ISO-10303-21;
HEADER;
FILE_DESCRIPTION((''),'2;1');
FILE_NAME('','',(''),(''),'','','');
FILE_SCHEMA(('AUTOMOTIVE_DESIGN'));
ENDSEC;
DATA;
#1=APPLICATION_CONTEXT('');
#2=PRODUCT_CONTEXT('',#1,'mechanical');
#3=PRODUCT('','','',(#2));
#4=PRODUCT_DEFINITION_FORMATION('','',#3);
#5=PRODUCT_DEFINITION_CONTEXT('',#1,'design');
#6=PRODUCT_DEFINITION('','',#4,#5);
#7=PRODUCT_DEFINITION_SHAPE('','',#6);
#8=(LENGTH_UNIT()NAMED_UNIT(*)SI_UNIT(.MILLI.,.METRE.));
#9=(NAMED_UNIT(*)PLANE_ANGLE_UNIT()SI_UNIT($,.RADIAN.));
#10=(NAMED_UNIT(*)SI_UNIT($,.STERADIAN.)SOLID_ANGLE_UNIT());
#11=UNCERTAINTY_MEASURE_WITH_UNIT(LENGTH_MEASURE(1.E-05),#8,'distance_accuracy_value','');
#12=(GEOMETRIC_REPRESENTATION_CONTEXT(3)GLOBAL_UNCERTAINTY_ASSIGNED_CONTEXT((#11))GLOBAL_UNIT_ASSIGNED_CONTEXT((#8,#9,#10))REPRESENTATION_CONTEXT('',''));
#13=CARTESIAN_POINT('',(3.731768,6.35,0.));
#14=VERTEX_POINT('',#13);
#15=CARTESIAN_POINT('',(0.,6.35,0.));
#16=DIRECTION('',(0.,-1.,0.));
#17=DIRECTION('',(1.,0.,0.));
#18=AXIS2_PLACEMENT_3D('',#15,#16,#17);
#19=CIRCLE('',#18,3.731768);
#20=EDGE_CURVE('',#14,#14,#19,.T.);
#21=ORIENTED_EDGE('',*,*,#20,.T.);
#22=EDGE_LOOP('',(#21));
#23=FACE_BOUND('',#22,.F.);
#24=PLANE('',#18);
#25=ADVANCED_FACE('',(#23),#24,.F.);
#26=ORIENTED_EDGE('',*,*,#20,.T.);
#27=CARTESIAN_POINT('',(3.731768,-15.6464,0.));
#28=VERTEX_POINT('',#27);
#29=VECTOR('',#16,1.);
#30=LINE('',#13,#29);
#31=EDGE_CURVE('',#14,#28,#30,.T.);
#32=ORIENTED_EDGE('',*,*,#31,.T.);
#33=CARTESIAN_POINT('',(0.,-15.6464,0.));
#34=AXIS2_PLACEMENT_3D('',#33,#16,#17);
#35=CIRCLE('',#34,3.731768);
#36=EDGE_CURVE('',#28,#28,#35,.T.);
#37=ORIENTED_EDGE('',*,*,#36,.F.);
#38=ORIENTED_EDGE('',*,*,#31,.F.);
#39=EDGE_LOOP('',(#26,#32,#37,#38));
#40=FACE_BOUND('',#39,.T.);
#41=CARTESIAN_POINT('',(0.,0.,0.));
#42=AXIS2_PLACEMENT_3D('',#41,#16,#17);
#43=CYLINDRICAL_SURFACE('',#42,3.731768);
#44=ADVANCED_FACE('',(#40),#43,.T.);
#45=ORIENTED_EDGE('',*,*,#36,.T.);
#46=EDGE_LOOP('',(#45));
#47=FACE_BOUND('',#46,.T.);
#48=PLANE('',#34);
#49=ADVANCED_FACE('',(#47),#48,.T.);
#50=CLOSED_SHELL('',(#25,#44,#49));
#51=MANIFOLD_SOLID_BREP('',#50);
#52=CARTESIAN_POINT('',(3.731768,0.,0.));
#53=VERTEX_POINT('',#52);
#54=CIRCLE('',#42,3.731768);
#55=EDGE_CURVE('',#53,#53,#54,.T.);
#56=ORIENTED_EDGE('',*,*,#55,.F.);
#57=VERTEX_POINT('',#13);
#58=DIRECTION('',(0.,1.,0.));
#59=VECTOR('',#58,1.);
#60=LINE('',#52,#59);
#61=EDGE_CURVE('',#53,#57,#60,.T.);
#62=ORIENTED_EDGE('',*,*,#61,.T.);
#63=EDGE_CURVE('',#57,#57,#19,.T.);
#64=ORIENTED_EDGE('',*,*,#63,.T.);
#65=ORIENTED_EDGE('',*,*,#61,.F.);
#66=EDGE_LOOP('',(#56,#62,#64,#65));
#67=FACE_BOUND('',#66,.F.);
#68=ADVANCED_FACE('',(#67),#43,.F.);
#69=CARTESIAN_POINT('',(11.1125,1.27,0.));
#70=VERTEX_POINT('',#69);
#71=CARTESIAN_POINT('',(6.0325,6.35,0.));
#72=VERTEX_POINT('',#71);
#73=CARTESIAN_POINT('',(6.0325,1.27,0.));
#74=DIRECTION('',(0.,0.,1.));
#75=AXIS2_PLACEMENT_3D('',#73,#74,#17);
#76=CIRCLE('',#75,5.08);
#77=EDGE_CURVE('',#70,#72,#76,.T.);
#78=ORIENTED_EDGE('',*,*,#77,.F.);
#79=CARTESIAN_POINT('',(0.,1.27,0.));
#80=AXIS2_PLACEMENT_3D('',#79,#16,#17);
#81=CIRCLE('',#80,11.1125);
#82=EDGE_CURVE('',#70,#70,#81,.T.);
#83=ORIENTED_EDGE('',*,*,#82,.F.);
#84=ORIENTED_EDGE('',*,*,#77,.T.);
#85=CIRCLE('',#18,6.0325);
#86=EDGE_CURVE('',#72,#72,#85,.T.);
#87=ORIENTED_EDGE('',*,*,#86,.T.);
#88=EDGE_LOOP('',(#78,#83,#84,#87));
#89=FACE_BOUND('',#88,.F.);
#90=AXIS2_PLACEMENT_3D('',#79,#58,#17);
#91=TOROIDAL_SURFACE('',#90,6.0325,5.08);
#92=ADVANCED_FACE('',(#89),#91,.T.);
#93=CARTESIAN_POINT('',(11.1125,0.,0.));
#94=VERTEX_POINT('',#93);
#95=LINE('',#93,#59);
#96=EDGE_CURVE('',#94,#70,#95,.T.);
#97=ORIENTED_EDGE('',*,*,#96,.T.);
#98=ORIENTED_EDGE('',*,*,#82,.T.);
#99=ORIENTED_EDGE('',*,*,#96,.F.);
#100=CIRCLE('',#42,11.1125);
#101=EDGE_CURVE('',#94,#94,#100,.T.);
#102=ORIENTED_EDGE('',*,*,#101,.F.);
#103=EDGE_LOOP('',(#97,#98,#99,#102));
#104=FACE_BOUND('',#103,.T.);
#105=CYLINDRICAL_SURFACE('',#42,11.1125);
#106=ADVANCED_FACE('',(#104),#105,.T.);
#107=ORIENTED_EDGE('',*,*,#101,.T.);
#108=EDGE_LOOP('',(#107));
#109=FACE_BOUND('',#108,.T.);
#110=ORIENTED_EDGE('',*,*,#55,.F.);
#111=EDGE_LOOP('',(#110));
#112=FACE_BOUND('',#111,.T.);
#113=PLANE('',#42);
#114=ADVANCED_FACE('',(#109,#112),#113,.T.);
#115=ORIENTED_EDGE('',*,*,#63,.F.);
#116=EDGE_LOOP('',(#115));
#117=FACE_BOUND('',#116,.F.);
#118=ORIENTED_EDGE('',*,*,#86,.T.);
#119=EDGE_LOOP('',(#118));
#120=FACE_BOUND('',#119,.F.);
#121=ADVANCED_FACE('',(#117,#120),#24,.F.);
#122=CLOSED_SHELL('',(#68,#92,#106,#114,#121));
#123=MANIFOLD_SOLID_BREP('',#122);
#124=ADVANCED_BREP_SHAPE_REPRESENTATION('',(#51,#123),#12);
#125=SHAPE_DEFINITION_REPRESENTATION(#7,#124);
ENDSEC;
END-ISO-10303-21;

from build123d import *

# Parameters (mm, degrees)
F0_R     = 3.7317681235
F1_DEPTH = 15.6464
F0_R_2   = 11.1125
F2_DEPTH = 6.35
F3_R     = 5.08
F4_DEPTH = 6.35


with BuildPart() as f1:
    # F0 (on Front) → F1 (new body)
    with BuildSketch(Plane.XZ):
        Circle(F0_R)
    extrude(amount=F1_DEPTH)

    # F4 (add, through all): a face of the model
    f4_faces = [f1.faces().sort_by_distance(p)[0] for p in [
        (0, 0, 0),
    ]]
    extrude(f4_faces, amount=F4_DEPTH)


with BuildPart() as f2:
    # F0 (on Front) → F2 (new body)
    with BuildSketch(Plane.XZ):
        Circle(F0_R_2)
        Circle(F0_R, mode=Mode.SUBTRACT)
    extrude(amount=-F2_DEPTH)

    # F3
    f3_edges = [f2.edges().sort_by_distance(p)[0] for p in [
        (-11.1125, 6.35, 0),
    ]]
    fillet(f3_edges, radius=F3_R)


solid = Compound([f1.part, f2.part])
